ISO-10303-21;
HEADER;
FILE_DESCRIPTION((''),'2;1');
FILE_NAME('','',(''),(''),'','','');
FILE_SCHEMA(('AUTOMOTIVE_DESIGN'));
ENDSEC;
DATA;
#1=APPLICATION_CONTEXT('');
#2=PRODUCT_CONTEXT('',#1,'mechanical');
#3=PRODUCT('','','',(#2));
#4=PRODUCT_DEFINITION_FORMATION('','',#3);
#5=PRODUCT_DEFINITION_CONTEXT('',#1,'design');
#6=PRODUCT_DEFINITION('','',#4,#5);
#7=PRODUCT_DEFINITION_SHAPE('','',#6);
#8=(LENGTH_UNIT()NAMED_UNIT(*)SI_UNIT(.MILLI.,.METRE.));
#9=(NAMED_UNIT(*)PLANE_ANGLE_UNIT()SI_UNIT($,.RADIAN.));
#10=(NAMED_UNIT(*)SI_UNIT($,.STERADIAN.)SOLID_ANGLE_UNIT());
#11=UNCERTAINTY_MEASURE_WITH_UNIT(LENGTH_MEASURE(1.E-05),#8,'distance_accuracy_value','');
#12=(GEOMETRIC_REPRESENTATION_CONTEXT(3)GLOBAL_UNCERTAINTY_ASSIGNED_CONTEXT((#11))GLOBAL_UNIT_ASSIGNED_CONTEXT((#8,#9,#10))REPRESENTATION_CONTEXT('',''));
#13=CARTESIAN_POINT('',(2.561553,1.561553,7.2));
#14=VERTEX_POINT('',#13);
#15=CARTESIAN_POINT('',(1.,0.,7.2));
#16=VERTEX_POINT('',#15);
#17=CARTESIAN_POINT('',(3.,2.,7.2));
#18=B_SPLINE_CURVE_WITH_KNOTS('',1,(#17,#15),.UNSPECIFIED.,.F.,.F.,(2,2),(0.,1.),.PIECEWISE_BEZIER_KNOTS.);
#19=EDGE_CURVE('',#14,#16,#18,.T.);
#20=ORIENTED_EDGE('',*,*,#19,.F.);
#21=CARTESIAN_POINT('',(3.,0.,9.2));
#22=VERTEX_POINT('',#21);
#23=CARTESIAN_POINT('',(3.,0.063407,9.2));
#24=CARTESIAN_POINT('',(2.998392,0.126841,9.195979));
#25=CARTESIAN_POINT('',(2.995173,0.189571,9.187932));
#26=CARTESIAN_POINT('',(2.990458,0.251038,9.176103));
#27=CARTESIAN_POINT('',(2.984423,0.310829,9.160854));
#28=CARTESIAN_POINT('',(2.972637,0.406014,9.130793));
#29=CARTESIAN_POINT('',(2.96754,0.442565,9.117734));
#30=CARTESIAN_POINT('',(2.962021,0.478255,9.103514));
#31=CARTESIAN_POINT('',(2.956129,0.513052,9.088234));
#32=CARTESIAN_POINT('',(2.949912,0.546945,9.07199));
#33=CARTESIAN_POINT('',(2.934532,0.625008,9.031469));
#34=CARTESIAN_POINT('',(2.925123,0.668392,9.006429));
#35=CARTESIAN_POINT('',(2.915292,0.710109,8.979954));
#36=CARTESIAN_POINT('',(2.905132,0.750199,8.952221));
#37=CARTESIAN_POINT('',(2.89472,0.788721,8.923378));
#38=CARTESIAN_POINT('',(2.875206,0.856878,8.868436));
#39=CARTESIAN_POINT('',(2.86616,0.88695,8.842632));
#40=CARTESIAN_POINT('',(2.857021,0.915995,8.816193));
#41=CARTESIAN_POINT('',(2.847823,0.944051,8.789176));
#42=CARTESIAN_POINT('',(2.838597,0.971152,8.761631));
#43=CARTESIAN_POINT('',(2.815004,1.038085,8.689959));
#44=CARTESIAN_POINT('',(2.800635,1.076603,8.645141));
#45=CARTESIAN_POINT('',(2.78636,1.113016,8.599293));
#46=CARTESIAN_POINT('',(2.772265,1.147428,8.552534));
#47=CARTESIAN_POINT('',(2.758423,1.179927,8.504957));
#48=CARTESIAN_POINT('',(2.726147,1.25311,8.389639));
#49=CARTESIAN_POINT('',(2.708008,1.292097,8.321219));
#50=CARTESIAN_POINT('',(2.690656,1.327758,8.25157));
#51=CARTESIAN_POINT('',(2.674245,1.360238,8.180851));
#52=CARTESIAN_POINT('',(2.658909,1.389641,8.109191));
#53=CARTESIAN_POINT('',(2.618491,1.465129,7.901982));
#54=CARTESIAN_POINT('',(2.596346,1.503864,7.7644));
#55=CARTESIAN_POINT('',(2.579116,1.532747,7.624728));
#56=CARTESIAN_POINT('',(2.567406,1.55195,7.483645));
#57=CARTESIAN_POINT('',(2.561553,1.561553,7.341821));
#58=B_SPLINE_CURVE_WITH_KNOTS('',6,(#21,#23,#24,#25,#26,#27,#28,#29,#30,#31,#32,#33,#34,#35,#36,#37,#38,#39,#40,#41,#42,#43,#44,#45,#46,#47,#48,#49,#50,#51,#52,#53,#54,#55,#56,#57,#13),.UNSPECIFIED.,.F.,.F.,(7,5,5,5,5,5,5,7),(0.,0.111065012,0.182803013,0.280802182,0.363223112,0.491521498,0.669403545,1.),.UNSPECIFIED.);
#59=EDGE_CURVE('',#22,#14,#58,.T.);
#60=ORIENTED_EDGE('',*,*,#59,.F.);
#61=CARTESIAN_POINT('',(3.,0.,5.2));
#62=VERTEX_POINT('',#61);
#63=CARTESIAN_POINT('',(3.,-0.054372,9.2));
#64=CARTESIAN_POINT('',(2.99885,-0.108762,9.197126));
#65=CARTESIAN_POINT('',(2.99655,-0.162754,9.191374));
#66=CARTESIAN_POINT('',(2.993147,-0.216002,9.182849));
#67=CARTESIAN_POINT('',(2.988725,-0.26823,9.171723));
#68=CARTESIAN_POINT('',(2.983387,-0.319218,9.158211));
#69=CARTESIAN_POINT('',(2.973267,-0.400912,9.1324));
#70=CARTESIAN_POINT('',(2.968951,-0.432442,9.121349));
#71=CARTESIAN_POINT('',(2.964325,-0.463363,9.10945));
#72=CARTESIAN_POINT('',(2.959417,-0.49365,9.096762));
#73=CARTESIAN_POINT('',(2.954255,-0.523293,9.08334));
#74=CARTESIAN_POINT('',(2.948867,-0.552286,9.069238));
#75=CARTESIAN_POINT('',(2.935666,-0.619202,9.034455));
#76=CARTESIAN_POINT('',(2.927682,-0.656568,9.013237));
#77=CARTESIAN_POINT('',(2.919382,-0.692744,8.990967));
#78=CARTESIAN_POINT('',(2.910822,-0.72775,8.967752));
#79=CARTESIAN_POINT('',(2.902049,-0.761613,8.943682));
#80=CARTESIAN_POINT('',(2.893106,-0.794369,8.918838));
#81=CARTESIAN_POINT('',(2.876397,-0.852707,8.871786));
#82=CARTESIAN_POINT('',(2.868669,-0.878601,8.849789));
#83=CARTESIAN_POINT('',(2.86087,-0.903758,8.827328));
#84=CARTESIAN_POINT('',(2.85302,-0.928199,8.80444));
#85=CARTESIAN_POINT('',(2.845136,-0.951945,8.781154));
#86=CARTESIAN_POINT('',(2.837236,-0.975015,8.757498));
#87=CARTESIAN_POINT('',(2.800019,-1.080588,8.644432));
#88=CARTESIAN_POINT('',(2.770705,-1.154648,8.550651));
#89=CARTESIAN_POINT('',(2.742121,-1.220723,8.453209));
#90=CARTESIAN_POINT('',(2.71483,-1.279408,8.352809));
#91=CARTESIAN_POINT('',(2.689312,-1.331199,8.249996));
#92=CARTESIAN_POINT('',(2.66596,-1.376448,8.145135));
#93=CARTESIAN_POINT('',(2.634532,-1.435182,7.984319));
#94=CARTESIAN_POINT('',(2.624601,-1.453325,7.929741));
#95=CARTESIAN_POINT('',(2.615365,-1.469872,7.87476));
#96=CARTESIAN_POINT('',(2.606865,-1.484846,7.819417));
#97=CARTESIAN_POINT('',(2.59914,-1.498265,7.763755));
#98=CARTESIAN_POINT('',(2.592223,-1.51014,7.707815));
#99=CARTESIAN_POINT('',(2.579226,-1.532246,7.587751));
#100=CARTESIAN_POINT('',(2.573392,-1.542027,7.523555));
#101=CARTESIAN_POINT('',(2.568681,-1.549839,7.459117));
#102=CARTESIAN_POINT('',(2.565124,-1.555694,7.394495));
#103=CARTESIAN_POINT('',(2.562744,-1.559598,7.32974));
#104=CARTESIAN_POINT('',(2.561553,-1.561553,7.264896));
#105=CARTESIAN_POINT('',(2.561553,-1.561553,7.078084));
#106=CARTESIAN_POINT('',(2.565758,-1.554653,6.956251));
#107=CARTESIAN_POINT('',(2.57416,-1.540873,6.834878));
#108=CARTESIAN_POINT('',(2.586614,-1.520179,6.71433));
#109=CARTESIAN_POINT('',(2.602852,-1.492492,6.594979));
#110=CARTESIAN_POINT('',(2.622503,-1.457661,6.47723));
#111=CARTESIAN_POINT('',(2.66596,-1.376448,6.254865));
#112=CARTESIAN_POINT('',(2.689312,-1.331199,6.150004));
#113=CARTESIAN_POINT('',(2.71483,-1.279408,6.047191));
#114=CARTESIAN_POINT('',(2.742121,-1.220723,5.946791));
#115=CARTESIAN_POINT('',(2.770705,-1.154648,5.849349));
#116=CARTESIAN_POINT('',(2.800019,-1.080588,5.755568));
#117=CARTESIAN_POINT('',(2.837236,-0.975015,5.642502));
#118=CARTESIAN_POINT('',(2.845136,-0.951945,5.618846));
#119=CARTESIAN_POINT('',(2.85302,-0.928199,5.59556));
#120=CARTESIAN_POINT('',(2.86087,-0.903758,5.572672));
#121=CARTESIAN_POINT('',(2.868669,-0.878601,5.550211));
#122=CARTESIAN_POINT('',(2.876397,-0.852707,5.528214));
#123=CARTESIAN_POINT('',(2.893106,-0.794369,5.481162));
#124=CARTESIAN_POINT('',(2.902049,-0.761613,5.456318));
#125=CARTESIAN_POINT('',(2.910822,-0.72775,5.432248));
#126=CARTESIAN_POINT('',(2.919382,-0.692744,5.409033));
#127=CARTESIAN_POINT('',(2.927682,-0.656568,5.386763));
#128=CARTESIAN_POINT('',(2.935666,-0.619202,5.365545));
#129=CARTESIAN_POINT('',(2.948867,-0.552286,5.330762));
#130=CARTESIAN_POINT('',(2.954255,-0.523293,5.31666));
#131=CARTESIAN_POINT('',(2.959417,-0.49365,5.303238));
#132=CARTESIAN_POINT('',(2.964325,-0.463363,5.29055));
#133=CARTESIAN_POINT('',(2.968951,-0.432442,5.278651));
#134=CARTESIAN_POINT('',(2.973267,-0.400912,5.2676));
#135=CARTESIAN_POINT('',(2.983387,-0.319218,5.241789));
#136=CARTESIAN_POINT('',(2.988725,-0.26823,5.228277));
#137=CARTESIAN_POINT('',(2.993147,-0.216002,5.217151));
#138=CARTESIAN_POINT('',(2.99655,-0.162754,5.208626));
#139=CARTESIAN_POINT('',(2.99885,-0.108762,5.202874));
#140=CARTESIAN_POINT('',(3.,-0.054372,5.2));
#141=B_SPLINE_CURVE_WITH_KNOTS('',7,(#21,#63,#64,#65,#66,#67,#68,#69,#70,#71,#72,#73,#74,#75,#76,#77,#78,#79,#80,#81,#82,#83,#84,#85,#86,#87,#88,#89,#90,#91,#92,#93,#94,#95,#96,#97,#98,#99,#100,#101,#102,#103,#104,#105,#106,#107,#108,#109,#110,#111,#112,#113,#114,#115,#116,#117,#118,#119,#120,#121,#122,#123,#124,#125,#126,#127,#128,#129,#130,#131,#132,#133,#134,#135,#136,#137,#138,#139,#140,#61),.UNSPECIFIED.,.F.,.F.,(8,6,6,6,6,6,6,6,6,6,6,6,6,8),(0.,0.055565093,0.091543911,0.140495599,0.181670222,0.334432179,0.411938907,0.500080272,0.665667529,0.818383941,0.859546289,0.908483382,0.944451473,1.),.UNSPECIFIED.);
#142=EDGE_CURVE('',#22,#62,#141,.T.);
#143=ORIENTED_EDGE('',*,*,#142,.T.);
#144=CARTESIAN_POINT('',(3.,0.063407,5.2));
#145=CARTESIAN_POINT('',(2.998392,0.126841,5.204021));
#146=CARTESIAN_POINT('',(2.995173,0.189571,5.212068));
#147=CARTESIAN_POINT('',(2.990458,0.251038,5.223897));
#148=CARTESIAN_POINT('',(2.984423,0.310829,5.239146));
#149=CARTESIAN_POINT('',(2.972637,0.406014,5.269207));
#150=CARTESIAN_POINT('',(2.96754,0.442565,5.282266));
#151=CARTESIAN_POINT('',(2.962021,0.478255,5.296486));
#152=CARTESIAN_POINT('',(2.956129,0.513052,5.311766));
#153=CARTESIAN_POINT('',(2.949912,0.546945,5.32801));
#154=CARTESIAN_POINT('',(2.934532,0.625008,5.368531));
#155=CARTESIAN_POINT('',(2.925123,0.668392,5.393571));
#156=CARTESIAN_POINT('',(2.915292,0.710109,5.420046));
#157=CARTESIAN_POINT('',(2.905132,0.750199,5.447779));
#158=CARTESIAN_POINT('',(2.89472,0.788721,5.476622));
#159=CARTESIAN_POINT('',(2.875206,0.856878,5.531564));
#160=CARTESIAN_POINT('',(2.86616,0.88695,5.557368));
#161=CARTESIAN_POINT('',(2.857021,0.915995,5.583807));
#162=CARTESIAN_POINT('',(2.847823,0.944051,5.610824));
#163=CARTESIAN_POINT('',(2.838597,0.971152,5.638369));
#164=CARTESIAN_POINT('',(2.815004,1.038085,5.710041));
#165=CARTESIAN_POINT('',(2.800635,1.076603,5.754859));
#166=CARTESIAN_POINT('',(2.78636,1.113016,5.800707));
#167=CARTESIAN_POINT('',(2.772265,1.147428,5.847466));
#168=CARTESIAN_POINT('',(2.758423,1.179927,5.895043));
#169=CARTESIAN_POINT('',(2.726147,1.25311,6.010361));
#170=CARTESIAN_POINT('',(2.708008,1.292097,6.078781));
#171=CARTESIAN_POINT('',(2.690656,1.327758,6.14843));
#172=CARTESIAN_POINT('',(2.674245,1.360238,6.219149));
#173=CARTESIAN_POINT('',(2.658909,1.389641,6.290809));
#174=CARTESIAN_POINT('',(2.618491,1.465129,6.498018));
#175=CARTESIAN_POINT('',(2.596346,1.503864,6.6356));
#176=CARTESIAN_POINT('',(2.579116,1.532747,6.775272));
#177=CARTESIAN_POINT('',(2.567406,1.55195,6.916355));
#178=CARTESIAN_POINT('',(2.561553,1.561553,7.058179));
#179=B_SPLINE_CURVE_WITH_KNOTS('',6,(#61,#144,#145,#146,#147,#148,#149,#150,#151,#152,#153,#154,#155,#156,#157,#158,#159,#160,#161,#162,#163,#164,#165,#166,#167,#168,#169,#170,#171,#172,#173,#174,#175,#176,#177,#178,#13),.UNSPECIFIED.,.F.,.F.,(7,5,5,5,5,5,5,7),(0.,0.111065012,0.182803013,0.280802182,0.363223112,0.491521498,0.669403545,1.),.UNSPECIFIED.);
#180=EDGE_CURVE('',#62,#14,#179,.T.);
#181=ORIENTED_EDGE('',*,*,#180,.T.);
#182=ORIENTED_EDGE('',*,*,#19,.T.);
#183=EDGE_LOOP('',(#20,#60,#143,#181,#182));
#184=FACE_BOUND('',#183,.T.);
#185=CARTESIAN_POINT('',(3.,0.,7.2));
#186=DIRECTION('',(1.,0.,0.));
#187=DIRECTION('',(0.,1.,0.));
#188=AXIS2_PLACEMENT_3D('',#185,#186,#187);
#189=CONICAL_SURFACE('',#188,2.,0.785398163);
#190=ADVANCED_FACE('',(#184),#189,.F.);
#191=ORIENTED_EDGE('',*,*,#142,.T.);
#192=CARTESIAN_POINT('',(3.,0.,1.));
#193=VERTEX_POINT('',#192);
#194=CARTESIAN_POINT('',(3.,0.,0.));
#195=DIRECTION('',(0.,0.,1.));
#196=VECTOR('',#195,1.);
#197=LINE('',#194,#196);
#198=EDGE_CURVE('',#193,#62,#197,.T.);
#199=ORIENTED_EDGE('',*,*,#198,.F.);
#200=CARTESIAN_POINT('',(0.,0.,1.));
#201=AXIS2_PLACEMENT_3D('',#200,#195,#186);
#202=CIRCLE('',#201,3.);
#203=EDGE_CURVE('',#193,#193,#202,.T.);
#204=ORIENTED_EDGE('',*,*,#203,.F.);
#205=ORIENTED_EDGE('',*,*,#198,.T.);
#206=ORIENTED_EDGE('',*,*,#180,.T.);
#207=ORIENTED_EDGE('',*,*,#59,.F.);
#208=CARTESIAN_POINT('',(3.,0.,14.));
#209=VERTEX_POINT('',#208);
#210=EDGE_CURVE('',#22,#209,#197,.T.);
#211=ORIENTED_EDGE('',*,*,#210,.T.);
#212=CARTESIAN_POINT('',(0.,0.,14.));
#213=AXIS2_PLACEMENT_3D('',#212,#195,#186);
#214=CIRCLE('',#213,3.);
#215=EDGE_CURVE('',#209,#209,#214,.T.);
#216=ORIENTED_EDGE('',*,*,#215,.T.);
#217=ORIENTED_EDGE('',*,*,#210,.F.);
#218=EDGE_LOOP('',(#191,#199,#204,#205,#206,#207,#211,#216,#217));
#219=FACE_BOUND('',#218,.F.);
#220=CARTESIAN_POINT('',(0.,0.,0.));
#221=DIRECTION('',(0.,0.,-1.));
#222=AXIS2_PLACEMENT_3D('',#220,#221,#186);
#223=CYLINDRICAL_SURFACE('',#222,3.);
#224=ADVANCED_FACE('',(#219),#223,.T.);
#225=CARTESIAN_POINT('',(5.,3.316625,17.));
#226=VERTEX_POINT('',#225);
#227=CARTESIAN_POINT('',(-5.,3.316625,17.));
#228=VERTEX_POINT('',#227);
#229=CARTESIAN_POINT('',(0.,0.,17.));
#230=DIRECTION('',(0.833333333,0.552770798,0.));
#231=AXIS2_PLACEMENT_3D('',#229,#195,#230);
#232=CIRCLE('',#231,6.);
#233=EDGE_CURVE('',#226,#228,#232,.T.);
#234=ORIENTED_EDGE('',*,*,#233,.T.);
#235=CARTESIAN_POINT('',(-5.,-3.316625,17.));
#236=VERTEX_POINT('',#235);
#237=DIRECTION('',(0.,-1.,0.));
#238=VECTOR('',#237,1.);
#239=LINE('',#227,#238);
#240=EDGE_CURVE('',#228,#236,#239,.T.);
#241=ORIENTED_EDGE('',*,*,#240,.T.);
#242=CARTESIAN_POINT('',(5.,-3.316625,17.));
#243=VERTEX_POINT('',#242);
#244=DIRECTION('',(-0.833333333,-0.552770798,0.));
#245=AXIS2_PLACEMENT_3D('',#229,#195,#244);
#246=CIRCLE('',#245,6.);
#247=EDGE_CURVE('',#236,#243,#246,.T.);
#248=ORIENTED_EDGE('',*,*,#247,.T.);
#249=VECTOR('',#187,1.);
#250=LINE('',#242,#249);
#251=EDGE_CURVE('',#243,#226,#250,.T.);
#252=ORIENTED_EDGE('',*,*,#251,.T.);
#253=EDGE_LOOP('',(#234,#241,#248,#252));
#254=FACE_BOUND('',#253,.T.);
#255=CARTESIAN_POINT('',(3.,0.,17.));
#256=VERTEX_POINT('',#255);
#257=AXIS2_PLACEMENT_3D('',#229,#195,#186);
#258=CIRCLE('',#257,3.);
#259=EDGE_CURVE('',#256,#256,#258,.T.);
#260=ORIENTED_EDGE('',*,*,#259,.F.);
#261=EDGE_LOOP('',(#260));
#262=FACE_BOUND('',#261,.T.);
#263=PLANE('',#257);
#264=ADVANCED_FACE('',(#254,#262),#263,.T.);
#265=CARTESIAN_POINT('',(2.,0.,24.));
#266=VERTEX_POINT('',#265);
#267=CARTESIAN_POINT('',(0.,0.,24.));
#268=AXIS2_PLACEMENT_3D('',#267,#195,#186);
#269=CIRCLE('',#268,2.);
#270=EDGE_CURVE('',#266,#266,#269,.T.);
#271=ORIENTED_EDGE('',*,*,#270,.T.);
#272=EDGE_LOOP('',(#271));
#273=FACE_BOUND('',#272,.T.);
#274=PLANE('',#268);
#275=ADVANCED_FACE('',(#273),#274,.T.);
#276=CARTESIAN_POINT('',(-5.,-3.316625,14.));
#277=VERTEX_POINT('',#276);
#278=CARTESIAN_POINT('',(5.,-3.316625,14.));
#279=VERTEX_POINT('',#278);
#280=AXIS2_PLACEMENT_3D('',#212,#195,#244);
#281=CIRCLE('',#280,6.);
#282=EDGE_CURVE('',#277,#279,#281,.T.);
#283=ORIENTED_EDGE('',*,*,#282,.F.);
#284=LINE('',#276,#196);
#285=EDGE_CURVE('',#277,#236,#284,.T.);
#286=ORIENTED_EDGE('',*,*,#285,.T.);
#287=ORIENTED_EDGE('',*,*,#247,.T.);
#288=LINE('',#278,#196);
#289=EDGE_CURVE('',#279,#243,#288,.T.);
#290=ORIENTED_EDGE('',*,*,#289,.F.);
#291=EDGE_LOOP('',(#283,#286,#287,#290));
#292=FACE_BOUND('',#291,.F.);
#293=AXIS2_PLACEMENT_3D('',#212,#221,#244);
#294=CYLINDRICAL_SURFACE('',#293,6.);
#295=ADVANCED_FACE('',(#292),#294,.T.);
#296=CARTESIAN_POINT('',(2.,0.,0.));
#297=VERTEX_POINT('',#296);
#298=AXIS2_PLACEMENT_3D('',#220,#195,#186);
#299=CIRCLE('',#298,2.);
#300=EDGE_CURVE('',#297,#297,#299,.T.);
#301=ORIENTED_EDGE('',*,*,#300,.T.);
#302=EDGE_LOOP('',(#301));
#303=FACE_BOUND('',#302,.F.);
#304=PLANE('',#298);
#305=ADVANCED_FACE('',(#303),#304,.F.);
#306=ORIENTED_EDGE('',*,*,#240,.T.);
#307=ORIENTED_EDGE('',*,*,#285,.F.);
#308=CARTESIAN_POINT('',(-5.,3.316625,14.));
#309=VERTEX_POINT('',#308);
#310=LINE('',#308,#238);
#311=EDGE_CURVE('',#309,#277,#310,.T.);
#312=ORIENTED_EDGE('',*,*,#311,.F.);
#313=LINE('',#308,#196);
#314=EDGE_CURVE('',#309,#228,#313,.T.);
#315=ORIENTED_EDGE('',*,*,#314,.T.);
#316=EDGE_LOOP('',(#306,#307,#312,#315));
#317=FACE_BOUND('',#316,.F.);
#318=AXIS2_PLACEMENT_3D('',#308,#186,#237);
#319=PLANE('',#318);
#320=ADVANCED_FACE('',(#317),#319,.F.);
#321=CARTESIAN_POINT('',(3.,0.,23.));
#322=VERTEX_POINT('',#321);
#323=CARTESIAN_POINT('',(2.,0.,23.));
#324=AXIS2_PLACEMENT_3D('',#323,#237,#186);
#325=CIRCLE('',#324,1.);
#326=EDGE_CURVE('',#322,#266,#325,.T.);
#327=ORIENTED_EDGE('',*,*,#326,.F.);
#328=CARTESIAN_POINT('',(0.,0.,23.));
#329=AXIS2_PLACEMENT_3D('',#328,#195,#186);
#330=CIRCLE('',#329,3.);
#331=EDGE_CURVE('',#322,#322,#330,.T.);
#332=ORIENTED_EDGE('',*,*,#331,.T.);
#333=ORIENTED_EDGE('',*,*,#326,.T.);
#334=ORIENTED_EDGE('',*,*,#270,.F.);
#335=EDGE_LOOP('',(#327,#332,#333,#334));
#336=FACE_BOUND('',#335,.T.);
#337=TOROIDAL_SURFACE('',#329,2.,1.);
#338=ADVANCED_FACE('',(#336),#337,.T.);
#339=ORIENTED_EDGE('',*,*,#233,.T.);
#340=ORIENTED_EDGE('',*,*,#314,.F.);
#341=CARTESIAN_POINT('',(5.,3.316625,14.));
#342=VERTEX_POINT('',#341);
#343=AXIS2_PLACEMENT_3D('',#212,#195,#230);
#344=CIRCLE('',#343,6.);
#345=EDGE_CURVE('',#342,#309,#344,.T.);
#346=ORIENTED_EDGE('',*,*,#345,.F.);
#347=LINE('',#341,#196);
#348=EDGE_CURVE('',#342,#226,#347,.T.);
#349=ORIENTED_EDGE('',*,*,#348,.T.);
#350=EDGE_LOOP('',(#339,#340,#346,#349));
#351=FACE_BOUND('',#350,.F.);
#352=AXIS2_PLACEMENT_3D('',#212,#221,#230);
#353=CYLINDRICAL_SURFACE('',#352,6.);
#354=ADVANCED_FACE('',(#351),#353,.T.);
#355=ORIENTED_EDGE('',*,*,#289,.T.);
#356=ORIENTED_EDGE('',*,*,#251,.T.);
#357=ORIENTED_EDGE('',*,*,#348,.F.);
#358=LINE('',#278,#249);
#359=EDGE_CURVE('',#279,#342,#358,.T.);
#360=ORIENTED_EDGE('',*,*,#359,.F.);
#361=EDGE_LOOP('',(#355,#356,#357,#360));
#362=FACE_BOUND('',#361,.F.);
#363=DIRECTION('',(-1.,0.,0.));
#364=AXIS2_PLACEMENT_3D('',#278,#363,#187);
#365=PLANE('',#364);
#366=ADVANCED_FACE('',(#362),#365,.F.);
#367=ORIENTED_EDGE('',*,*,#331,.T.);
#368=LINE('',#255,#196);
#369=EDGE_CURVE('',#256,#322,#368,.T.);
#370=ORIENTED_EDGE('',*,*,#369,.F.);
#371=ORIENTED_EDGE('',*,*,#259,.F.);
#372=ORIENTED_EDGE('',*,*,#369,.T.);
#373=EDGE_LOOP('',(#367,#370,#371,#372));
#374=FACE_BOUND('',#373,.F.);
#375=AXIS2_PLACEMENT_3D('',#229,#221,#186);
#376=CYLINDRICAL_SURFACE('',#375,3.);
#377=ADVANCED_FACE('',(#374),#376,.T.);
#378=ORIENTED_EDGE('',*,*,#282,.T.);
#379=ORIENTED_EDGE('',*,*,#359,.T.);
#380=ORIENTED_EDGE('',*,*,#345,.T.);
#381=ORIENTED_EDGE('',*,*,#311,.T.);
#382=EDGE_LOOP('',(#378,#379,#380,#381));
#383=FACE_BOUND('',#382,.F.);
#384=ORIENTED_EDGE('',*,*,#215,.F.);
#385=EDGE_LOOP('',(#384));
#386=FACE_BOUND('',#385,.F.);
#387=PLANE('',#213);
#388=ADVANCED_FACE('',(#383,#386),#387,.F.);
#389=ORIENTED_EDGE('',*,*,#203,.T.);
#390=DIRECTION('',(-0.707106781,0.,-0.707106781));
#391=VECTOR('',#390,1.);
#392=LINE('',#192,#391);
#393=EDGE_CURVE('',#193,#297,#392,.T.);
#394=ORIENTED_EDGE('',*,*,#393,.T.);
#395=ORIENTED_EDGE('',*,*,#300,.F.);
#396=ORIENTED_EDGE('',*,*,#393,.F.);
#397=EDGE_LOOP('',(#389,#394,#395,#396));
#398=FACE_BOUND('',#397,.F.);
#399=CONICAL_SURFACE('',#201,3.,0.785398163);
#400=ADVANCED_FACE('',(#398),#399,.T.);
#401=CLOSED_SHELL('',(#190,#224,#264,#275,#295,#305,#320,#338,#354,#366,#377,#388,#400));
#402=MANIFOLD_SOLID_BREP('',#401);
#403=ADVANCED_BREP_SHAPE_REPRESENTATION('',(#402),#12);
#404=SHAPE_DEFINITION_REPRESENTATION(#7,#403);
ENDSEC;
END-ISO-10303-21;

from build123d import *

# Parameters (mm, degrees)
F0_R     = 3
F1_DEPTH = 14
F3_DEPTH = 3
F4_R     = 3
F5_DEPTH = 7
F6_R     = 1
F8_R     = 2
F10_SIZE = 1


# Not quite as in the source:
# - an extrude whose draft closes it to a point is written as a loft to that point


with BuildPart() as f1:
    # F0 (on Top) → F1 (new body)
    with BuildSketch(Plane.XY):
        Circle(F0_R)
    extrude(amount=F1_DEPTH)

    # F2 (on face) → F3 (join)
    with BuildSketch(Plane.XY.offset(14)):
        with BuildLine():
            Line((-5, 3.3166247904), (-5, -3.3166247904))
            ThreePointArc((-5, -3.3166247904), (0, -6), (5, -3.3166247904))
            Line((5, -3.3166247904), (5, 3.3166247904))
            ThreePointArc((5, 3.3166247904), (0, 6), (-5, 3.3166247904))
        make_face()
    extrude(amount=F3_DEPTH)

    # F4 (on face) → F5 (join)
    with BuildSketch(Plane.XY.offset(17)):
        Circle(F4_R)
    extrude(amount=F5_DEPTH)

    # F6
    f6_edges = [f1.edges().sort_by_distance(p)[0] for p in [
        (-3, 0, 24),
    ]]
    fillet(f6_edges, radius=F6_R)

    # F8 (on offset) → F9 section 0
    with BuildSketch(Plane.YZ.offset(3), mode=Mode.PRIVATE) as f9_s0:
        with Locations((0, 7.2)):
            Circle(F8_R)
    loft([f9_s0.sketch, Vertex(1, 0, 7.2)], ruled=True, mode=Mode.SUBTRACT)

    # F10
    f10_edges = [f1.edges().sort_by_distance(p)[0] for p in [
        (-3, 0, 0),
    ]]
    chamfer(f10_edges, length=F10_SIZE)


solid = f1.part
